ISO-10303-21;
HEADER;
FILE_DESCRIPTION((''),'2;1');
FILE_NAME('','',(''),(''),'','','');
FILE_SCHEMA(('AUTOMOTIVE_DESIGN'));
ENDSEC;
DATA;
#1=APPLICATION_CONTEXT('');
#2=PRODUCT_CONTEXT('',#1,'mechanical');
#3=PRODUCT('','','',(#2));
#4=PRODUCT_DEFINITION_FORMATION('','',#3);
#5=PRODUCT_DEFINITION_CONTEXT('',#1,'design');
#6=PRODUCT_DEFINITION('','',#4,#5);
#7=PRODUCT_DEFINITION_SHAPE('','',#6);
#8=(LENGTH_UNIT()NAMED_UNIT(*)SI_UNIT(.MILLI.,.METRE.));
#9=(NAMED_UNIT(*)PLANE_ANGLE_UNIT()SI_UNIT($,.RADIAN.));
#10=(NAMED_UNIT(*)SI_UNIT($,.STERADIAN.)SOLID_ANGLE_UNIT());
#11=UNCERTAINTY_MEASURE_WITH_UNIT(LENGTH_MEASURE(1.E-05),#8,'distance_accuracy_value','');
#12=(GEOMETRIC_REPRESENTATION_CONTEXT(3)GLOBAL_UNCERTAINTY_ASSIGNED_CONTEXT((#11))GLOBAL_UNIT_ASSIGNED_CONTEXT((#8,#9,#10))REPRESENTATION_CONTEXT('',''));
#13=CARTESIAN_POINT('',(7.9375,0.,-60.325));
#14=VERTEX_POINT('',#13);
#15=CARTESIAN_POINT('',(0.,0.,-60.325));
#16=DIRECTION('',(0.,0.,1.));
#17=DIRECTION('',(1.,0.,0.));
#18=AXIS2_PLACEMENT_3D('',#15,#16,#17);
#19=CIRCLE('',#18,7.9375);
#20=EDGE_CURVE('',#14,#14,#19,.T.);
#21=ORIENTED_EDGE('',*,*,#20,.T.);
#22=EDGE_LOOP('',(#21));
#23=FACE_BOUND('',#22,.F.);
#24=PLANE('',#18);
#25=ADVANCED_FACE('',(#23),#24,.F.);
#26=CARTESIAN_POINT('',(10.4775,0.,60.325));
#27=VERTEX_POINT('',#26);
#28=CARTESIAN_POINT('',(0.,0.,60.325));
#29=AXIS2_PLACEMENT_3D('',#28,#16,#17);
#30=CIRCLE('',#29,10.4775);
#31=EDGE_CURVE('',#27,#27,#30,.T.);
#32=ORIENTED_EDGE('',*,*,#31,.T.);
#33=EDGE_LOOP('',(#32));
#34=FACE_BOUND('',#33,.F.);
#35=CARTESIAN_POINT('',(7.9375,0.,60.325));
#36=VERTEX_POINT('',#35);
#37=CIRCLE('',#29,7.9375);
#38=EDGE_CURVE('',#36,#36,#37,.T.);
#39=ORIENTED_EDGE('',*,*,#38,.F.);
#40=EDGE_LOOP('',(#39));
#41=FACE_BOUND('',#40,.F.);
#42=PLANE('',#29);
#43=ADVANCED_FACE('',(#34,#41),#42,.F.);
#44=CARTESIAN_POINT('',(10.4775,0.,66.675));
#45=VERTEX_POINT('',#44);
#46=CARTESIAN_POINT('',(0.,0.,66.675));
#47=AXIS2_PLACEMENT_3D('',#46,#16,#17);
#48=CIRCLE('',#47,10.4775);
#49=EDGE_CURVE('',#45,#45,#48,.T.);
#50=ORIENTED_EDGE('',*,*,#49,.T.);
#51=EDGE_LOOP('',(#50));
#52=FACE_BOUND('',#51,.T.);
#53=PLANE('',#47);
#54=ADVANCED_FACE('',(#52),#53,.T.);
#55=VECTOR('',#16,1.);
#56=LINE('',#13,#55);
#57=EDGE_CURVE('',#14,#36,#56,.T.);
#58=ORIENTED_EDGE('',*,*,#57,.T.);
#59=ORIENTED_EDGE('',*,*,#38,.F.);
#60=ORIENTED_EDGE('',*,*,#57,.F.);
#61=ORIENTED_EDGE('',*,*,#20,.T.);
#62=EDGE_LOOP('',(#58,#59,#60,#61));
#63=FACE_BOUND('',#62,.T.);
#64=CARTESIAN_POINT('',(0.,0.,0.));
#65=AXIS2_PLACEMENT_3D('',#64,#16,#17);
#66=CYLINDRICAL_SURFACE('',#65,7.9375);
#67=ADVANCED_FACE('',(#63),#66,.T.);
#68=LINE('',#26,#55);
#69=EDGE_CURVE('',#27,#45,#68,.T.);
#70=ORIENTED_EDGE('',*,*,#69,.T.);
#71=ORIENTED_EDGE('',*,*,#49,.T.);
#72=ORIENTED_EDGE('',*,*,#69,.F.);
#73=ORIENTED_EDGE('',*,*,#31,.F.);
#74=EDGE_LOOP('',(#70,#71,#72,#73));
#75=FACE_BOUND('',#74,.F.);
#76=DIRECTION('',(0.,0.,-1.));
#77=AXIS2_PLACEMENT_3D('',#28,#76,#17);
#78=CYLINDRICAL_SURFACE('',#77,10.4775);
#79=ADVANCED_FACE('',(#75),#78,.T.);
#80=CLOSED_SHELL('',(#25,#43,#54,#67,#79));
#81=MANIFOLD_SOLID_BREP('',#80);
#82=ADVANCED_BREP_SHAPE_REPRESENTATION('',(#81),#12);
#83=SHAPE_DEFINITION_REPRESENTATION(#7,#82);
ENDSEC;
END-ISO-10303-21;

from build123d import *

# Parameters (mm, degrees)
F1_R     = 7.9375
F2_DEPTH = 60.325
F3_R     = 10.4775
F4_DEPTH = 6.35


# Not quite as in the source:
# - a variable given as a bare number and used for a length is read in inches; the dataset says mm whatever the document's units were


with BuildPart() as f2:
    # F1 (on Top) → F2 (new body, symmetric)
    with BuildSketch(Plane.XY):
        Circle(F1_R)
    extrude(amount=F2_DEPTH, both=True)

    # F3 (on face) → F4 (join)
    with BuildSketch(Plane.XY.offset(60.325)):
        Circle(F3_R)
    extrude(amount=F4_DEPTH)


solid = f2.part
